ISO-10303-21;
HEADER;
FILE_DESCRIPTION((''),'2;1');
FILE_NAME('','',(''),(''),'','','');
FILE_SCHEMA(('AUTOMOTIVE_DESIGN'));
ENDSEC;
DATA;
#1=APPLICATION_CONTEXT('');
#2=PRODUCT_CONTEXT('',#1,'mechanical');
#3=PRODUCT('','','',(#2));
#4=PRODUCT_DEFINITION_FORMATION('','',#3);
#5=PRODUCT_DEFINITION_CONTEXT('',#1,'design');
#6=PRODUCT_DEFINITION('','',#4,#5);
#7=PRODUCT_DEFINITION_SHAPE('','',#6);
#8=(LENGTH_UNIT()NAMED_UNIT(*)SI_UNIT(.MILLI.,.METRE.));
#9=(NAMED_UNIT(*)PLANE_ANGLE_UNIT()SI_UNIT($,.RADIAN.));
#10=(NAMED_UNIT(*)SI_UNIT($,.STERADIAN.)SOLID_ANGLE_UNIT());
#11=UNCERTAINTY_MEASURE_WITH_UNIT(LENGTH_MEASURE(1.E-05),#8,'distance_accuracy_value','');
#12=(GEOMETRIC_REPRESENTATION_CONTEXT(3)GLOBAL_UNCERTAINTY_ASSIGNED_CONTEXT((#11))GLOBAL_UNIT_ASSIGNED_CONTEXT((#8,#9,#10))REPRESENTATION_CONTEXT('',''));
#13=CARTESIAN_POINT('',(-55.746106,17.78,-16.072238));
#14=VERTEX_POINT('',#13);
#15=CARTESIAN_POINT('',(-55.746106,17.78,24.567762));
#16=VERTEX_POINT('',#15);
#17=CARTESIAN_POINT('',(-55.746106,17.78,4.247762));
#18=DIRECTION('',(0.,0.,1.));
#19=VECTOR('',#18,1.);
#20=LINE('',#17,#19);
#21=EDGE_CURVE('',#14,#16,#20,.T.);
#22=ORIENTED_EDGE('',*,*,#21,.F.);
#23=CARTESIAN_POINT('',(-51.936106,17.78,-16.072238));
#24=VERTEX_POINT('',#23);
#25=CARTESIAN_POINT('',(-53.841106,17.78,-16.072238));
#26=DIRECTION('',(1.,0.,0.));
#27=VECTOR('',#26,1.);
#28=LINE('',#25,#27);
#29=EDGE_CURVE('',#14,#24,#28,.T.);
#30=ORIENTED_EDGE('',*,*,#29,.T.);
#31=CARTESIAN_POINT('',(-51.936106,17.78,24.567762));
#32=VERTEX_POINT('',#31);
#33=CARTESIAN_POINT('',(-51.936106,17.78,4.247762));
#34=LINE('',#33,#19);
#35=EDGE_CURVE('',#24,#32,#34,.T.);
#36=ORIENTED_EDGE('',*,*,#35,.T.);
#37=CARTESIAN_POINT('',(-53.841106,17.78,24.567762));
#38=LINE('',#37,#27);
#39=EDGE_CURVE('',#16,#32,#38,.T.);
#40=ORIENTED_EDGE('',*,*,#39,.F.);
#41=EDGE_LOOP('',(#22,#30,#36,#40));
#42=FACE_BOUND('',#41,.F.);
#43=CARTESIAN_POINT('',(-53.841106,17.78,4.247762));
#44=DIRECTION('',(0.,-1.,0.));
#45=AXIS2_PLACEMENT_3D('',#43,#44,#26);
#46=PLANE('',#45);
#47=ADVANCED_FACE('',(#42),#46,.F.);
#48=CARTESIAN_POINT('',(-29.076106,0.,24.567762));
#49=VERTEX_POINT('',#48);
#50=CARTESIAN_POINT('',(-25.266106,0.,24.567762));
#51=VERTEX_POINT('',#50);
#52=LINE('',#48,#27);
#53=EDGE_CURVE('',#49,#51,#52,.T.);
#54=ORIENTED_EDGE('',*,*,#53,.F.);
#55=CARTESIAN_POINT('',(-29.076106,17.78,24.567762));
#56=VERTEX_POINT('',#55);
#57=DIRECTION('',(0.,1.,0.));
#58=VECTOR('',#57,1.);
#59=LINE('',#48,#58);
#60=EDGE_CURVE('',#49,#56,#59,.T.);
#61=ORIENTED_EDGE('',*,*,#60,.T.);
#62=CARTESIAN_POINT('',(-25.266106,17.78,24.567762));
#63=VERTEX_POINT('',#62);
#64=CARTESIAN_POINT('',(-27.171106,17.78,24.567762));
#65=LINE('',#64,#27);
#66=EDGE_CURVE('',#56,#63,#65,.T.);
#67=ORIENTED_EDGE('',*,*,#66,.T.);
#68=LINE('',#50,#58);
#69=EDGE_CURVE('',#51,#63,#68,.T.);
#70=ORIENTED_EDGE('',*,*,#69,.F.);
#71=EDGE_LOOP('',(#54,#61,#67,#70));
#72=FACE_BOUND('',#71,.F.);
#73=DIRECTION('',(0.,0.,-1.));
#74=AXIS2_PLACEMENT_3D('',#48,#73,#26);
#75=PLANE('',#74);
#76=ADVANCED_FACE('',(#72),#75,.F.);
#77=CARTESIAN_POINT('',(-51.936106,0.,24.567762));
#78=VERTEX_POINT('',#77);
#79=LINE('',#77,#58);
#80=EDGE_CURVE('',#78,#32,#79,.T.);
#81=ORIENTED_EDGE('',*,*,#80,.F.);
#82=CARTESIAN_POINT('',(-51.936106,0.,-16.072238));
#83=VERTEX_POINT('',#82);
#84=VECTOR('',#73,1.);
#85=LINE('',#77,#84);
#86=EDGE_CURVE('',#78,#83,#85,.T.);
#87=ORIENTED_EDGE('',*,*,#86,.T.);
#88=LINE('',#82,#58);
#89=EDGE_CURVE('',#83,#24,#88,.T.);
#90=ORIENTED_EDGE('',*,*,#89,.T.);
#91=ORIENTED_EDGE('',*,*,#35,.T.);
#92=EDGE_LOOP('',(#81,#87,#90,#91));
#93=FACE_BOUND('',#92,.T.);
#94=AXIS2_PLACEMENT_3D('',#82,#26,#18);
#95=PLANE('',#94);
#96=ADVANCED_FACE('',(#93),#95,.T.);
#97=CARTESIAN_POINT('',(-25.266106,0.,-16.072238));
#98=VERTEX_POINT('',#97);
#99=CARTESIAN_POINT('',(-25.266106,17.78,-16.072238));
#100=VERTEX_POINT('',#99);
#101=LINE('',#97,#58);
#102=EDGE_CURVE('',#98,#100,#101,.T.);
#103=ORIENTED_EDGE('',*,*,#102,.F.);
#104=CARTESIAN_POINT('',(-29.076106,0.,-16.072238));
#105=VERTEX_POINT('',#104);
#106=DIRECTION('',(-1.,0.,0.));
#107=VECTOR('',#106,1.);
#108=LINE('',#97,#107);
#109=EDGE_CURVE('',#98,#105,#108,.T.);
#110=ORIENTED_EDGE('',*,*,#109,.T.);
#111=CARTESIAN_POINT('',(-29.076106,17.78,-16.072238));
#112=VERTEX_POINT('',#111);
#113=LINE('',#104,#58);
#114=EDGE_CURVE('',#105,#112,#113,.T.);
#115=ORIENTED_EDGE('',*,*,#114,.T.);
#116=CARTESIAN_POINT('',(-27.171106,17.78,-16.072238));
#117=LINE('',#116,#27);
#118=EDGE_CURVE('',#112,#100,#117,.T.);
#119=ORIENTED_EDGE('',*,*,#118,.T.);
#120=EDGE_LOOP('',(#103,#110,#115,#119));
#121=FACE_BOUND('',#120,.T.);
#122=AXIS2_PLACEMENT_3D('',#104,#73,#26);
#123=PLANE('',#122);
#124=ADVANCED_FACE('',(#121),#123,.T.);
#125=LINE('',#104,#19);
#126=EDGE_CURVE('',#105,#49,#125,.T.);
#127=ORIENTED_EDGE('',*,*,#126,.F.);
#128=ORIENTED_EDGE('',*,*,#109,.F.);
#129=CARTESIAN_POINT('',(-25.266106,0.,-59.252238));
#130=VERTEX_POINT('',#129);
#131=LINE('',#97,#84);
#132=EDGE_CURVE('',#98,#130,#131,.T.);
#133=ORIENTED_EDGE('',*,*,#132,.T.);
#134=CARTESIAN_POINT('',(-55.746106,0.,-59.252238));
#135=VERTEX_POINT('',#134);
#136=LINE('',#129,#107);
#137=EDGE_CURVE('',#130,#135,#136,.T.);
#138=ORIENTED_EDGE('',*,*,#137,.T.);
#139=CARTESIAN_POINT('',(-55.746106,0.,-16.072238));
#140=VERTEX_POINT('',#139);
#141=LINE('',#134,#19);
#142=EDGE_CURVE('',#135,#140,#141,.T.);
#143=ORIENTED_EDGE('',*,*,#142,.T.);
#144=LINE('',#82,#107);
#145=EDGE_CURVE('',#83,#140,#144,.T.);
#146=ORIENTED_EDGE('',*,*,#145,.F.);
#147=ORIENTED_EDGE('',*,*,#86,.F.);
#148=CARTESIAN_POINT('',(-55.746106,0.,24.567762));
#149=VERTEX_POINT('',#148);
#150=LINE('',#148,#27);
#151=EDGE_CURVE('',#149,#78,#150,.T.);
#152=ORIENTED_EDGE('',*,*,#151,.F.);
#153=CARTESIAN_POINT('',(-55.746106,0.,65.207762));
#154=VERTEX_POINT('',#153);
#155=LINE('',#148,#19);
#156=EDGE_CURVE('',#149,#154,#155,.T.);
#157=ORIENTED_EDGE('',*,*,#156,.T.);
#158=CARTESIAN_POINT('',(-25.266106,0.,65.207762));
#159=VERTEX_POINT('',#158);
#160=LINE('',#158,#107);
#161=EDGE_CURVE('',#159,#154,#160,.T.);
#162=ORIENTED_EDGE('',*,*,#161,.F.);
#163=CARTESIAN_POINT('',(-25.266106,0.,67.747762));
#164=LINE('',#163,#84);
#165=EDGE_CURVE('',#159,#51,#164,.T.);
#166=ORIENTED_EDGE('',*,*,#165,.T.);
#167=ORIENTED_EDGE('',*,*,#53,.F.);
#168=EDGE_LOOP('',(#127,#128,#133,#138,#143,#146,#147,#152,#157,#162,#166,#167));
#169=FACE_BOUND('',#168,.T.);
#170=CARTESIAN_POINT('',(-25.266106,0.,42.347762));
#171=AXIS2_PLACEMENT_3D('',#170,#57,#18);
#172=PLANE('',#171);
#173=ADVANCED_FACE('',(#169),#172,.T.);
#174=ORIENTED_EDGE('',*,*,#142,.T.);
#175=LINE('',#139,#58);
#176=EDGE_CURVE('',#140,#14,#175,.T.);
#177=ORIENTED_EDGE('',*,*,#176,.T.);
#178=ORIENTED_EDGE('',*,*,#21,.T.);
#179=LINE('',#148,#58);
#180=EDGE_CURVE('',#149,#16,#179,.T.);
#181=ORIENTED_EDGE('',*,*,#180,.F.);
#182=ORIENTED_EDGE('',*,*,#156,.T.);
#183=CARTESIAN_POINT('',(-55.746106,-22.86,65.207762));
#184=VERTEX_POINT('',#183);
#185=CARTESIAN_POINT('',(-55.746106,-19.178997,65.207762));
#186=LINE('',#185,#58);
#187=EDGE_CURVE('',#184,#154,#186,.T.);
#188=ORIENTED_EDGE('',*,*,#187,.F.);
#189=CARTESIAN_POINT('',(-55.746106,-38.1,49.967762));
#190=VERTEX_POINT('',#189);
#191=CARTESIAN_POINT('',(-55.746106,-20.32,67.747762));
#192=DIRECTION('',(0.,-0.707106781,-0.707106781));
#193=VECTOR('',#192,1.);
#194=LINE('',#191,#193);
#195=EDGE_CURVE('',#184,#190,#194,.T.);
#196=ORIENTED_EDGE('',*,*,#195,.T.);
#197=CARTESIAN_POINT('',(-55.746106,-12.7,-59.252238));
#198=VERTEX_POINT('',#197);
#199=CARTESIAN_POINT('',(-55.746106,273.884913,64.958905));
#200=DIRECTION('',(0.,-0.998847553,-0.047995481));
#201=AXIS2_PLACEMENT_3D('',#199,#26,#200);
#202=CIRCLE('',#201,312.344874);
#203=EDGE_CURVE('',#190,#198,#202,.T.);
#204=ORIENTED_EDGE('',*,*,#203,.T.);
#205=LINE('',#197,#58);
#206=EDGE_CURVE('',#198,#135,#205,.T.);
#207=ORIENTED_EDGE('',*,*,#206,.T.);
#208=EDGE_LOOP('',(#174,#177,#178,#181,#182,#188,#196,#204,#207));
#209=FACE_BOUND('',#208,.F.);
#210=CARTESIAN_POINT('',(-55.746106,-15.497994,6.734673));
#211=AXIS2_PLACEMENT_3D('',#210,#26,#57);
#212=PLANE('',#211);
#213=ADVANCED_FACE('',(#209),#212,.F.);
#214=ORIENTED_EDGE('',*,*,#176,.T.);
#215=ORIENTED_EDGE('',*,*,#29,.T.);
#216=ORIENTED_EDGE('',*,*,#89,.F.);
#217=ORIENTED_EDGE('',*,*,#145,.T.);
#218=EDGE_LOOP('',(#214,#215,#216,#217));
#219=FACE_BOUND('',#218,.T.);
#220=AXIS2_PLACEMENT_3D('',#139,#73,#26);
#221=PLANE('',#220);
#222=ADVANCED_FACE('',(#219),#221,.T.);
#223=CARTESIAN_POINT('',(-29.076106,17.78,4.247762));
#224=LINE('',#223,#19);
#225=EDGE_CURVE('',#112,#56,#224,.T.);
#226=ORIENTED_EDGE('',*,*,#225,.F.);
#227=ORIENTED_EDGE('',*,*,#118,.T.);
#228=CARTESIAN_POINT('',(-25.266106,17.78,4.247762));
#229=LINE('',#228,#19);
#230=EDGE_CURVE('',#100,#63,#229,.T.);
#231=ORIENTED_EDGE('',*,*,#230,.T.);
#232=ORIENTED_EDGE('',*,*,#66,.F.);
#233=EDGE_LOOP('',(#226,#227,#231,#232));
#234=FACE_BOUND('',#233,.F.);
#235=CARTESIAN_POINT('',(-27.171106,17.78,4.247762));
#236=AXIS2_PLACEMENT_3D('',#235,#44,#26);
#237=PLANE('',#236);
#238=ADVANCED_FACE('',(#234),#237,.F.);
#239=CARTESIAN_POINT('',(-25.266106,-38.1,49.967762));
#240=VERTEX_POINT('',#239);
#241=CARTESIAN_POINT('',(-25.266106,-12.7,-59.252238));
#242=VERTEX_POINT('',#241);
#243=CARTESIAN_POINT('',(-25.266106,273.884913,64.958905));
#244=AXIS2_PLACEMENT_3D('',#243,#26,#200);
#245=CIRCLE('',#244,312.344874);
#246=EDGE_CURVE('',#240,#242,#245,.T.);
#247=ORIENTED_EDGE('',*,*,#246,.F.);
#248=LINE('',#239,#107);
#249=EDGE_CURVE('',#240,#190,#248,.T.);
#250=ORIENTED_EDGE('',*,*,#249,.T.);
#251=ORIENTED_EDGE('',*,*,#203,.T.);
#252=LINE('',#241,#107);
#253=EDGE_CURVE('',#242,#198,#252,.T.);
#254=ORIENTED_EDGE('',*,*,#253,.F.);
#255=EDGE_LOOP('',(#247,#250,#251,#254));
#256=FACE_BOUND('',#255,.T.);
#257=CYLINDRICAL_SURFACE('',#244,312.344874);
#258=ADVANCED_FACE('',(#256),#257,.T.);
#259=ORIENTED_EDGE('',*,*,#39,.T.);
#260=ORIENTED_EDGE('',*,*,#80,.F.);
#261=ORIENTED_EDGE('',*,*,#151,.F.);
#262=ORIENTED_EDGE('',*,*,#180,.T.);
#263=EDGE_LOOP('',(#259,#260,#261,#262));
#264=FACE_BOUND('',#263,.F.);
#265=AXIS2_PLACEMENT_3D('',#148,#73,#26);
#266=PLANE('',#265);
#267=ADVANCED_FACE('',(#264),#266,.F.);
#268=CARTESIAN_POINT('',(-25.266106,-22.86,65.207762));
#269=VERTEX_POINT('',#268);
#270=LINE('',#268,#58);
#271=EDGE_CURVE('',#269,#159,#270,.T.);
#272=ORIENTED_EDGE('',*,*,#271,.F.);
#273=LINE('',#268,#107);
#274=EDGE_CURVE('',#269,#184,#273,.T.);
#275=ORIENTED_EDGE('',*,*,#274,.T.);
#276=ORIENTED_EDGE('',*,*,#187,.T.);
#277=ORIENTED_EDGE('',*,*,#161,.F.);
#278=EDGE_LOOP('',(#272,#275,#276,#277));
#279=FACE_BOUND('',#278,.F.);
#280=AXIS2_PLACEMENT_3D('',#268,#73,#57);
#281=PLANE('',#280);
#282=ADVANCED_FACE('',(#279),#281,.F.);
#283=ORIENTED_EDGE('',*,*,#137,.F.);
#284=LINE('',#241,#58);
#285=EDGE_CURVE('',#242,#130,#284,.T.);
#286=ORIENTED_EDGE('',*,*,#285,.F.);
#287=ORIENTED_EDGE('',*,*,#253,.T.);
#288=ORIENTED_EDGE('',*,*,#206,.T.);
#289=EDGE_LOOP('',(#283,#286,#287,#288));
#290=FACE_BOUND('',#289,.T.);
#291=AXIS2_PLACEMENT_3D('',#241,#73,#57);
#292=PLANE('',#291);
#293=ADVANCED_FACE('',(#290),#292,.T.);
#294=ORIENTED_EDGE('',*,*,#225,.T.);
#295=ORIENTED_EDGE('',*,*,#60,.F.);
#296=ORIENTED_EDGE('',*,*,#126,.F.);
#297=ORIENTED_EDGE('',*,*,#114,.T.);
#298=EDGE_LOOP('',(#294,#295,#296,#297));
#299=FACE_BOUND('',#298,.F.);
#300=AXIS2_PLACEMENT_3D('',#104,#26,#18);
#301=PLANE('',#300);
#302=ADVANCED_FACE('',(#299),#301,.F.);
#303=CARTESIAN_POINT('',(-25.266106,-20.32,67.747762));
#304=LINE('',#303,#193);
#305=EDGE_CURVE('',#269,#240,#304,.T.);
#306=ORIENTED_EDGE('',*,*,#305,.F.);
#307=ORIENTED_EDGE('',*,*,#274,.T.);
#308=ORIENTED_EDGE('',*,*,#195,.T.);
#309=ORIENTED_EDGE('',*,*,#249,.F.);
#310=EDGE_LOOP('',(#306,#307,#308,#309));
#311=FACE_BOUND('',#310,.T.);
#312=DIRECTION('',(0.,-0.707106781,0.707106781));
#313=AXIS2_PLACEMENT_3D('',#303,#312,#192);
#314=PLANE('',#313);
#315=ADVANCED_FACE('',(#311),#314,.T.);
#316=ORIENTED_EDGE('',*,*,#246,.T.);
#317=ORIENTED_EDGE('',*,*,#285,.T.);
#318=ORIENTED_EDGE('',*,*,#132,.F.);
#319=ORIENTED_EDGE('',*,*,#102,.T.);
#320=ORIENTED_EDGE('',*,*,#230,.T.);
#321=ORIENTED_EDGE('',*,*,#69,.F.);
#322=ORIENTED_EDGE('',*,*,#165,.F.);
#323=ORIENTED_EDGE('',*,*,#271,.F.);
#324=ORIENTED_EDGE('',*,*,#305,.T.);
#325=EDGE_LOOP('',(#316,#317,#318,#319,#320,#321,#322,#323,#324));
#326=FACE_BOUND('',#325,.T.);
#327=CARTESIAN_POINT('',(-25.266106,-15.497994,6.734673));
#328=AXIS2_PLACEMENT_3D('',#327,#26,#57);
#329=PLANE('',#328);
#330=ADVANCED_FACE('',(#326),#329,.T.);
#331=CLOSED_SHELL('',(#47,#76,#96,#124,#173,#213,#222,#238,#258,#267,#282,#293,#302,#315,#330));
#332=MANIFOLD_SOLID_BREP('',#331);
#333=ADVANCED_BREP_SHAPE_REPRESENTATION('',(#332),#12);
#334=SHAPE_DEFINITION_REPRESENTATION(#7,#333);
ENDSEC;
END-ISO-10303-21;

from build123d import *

# Parameters (mm, degrees)
F1_DEPTH      = 7.62
F0_W          = 3.81
F0_H          = 40.64
F2_DEPTH      = 17.78
F2_DEPTH_BACK = 7.62
F4_DEPTH      = 30.48
F6_DEPTH      = 50.8


# Not quite as in the source:
# - a feature names something its author has since deleted; it is built from what else it names


with BuildPart() as f1:
    # F0 (on Front) → F1 (new body)
    with BuildSketch(Plane.XZ):
        Polygon((-25.2661056346, 42.3477623217), (-55.7461056346, 42.3477623217), (-55.7461056346, 24.5677623217), (-51.9361056346, 24.5677623217), (-51.9361056346, -16.0722376783), (-55.7461056346, -16.0722376783), (-55.7461056346, -33.8522376783), (-25.2661056346, -33.8522376783), (-25.2661056346, -16.0722376783), (-29.0761056346, -16.0722376783), (-29.0761056346, 24.5677623217), (-25.2661056346, 24.5677623217), align=None)
    extrude(amount=F1_DEPTH)

    # F0 (on Front) → F2 (join, two sides)
    with BuildSketch(Plane.XZ) as f2_sk:
        with Locations((-53.8411056346, 4.2477623217)):
            Rectangle(F0_W, F0_H)
        with Locations((-27.1711056346, 4.2477623217)):
            Rectangle(F0_W, F0_H)
    extrude(amount=-F2_DEPTH)
    extrude(f2_sk.sketch, amount=F2_DEPTH_BACK)

    # F3 (on face) → F4 (join)
    with BuildSketch(Plane.YZ.offset(-25.2661056346)):
        with BuildLine():
            Line((-7.62, 42.3477623217), (0, 42.3477623217))
            Line((0, 42.3477623217), (0, 67.7477623217))
            Line((0, 67.7477623217), (-20.32, 67.7477623217))
            Line((-20.32, 67.7477623217), (-38.1, 49.9677623217))
            ThreePointArc((-38.1, 49.9677623217), (-30.341501455, -5.7914240632), (-12.7, -59.2522376783))
            Line((-12.7, -59.2522376783), (0, -59.2522376783))
            Line((0, -59.2522376783), (0, -33.8522376783))
            Line((0, -33.8522376783), (-7.62, -33.8522376783))
            Line((-7.62, -33.8522376783), (-7.62, 42.3477623217))
        make_face()
    extrude(amount=-F4_DEPTH)

    # F5 (on face) → F6 (cut)
    with BuildSketch(Plane.YZ.offset(-25.2661056346)):
        Polygon((0, 65.2077623217), (0, 67.7477623217), (-20.32, 67.7477623217), (-22.86, 65.2077623217), align=None)
    extrude(amount=-F6_DEPTH, mode=Mode.SUBTRACT)


solid = f1.part
